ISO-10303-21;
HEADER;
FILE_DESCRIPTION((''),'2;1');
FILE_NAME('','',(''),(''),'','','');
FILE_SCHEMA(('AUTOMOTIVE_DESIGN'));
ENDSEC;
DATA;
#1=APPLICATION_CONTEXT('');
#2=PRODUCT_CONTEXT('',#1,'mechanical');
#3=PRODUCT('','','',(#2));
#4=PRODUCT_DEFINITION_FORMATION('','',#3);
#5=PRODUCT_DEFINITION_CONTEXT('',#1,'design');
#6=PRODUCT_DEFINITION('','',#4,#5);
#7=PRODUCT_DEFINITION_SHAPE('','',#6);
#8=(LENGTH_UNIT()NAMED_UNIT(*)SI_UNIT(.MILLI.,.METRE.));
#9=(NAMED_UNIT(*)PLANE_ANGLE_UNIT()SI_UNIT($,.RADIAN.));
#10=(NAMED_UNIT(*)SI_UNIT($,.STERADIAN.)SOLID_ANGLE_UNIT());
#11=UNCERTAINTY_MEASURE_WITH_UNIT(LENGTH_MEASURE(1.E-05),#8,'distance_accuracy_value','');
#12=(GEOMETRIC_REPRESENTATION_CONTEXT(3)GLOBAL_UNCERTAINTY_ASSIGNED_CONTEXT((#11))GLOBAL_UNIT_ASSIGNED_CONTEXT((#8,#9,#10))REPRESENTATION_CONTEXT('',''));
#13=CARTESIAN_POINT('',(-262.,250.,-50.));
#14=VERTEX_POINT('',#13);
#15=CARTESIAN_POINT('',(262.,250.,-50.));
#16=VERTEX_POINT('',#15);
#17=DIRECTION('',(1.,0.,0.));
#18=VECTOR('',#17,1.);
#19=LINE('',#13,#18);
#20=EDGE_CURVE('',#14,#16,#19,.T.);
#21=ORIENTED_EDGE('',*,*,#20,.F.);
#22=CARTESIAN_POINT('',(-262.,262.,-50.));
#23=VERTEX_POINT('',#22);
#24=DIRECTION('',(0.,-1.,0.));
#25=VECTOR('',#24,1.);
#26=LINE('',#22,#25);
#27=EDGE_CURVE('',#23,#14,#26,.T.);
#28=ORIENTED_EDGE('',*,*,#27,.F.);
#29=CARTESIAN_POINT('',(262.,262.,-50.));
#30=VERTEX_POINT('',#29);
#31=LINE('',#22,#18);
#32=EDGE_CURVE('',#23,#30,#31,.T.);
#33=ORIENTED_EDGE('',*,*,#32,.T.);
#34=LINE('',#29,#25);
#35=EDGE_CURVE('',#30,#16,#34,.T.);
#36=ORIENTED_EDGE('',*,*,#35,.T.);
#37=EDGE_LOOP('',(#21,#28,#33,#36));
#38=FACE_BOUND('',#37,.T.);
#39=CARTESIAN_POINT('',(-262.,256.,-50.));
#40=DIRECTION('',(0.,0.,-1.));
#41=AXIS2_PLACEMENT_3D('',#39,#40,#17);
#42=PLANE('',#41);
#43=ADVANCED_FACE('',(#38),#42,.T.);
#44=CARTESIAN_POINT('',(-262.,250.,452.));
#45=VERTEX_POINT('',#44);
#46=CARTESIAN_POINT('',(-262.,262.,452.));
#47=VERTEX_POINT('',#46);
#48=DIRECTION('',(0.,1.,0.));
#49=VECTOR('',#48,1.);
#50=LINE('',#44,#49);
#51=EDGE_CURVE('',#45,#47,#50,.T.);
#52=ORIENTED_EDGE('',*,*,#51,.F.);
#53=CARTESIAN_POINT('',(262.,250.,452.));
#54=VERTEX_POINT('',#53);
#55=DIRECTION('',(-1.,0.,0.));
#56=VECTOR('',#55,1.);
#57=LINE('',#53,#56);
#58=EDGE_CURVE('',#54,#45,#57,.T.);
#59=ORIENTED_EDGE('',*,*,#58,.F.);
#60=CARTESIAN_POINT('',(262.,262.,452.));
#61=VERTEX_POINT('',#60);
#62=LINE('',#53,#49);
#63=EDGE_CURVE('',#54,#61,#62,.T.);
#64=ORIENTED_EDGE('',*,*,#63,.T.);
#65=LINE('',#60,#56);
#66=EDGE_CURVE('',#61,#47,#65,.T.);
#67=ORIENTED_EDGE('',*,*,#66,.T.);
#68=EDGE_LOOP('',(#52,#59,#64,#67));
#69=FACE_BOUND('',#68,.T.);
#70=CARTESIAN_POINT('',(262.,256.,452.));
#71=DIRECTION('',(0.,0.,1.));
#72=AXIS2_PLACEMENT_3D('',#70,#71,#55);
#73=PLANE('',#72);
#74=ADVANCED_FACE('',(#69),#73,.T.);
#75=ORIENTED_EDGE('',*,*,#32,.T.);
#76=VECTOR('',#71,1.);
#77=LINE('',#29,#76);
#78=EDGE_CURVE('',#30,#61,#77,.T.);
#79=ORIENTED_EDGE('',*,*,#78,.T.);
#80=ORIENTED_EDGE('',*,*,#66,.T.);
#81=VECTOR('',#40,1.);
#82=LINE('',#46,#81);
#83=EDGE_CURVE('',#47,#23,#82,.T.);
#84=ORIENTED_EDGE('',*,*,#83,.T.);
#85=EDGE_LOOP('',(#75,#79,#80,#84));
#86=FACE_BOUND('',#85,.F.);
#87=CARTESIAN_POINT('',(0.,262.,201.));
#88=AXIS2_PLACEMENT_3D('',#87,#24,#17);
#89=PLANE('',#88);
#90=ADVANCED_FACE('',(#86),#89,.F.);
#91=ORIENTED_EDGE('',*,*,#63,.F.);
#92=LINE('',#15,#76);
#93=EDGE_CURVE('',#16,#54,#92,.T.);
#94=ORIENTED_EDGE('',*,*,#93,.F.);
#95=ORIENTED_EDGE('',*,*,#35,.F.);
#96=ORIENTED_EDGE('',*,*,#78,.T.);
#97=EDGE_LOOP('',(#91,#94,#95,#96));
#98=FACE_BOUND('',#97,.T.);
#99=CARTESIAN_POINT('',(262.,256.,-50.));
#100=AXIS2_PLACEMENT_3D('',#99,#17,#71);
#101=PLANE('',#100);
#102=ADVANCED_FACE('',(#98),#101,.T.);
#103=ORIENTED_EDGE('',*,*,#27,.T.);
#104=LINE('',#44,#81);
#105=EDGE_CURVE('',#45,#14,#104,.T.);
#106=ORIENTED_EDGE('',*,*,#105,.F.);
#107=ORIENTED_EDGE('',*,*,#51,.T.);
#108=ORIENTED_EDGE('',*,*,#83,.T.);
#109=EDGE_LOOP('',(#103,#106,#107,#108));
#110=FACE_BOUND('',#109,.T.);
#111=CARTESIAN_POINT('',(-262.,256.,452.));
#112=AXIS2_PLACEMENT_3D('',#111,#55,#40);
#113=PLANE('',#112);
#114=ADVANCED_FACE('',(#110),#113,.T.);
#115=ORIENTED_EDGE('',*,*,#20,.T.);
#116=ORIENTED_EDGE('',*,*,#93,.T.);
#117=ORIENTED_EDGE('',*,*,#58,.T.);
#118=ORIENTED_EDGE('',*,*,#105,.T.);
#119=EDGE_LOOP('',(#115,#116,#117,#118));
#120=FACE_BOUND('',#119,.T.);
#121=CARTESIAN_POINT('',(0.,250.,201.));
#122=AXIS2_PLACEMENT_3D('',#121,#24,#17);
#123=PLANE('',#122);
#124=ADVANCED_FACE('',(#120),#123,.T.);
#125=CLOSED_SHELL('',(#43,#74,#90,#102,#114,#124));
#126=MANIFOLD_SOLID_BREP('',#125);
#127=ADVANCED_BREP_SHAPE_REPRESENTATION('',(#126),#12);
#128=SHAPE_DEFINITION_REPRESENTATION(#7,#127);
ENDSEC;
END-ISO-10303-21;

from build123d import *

# Parameters (mm, degrees)
F0_W      = 500
F0_H      = 500
F1_DEPTH  = 12
F2_W      = 500
F2_H      = 50
F3_DEPTH  = 6
F6_DEPTH  = 6
F14_DEPTH = 6
F15_R     = 19.99999
F19_DEPTH = 6
F22_DEPTH = 12
F25_DEPTH = 6
F27_W     = 12
F27_H     = 320
F28_DEPTH = 44
F31_W     = 196
F31_H     = 12
F32_DEPTH = 44
F37_DEPTH = 3
F43_DEPTH = 12


# Not quite as in the source:
# - a fillet or chamfer is up to 0.001 mm smaller than in the source, because OpenCascade refuses the exact size


with BuildPart() as f1:
    # F0 (on Top) → F1 (new body)
    with BuildSketch(Plane.XY):
        Rectangle(F0_W, F0_H)
    extrude(amount=F1_DEPTH)


with BuildPart() as f3:
    # F2 (on Right) → F3 (new body, symmetric)
    with BuildSketch(Plane.YZ):
        Rectangle(F2_W, F2_H)
    extrude(amount=F3_DEPTH, both=True)


with BuildPart() as f3_1:
    # F4: moved
    add(f3.part.moved(Location((0, 0, -25))))


with BuildPart() as f6:
    # F5 (on Front) → F6 (new body, symmetric)
    with BuildSketch(Plane.XZ):
        Polygon((-250, -25), (250, -25), (250, 25), (6, 25), (6, 0), (-6, 0), (-6, 25), (-250, 25), align=None)
    extrude(amount=F6_DEPTH, both=True)


with BuildPart() as f6_1:
    # F7: moved
    add(f6.part.moved(Location((0, 80, -25))))


with BuildPart() as f8_1:
    # F8: copy of F6
    add(f6_1.part)


with BuildPart() as f3_2:
    add(f3_1.part)

    # F10: cut F6
    add(f6_1.part, mode=Mode.SUBTRACT)


with BuildPart() as f11_1:
    # F11: copy of F6
    add(f6_1.part.moved(Location((0, 164, 0))))


with BuildPart() as f3_3:
    add(f3_2.part)

    # F12: cut F11_1
    add(f11_1.part, mode=Mode.SUBTRACT)


with BuildPart() as f14:
    # F13 (on Right) → F14 (new body, symmetric)
    with BuildSketch(Plane.YZ):
        Polygon((250, -50), (250, 0), (250, 452), (70, 452), (-110, 452), (-250, 100), (-250, -50), align=None)
        Polygon((0, 412), (70, 412), (140, 412), (140, 372), (0, 372), align=None, mode=Mode.SUBTRACT)
    extrude(amount=F14_DEPTH, both=True)

    # F15 (radius 20 in the source; OpenCascade refuses exactly that, so slightly less here)
    f15_edges = [f14.edges().sort_by_distance(p)[0] for p in [
        (0, 140, 372),
        (0, 140, 412),
        (0, 0, 412),
        (0, 0, 372),
    ]]
    fillet(f15_edges, radius=F15_R)


with BuildPart() as f14_1:
    # F16: moved
    add(f14.part.moved(Location((-256, 0, 0))))


with BuildPart() as f17_1:
    # F17: copy of F14
    add(f14_1.part.moved(Location((512, 0, 0))))


with BuildPart() as f19:
    # F18 (on Front) → F19 (new body, symmetric)
    with BuildSketch(Plane.XZ):
        Polygon((-262, 452), (-262, 0), (-262, -50), (262, -50), (262, 452), align=None)
    extrude(amount=F19_DEPTH, both=True)


with BuildPart() as f19_1:
    # F20: moved
    add(f19.part.moved(Location((0, 256, 0))))


with BuildPart() as f22:
    # F21 (on face) → F22 (new body)
    with BuildSketch(Plane.XY.offset(12)):
        Polygon((262, 262), (0, 262), (-262, 262), (-262, -110), (262, -110), align=None)
    extrude(amount=F22_DEPTH)


with BuildPart() as f22_1:
    # F23: moved
    add(f22.part.moved(Location((0, 0, 440))))


with BuildPart() as f25:
    # F24 (on Front) → F25 (new body, symmetric)
    with BuildSketch(Plane.XZ):
        Polygon((-250, 12), (0, 12), (250, 12), (250, 100), (-250, 100), align=None)
    extrude(amount=F25_DEPTH, both=True)


with BuildPart() as f25_1:
    # F26: moved
    add(f25.part.moved(Location((0, -244, 0))))


with BuildPart() as f28:
    # F27 (on Top) → F28 (new body)
    with BuildSketch(Plane.XY):
        with Locations((-24, -90)):
            Rectangle(F27_W, F27_H)
    extrude(amount=F28_DEPTH)


with BuildPart() as f28_1:
    # F29: moved
    add(f28.part.moved(Location((0, 0, -48))))


with BuildPart() as f30_1:
    # F30: copy of F28
    add(f28_1.part.moved(Location((-208, 0, 0))))


with BuildPart() as f32:
    # F31 (on Top) → F32 (new body)
    with BuildSketch(Plane.XY):
        with Locations((-128, -244)):
            Rectangle(F31_W, F31_H)
    extrude(amount=-F32_DEPTH)


with BuildPart() as f32_1:
    # F33: moved
    add(f32.part.moved(Location((0, 0, -4))))


with BuildPart() as f34_1:
    # F34: copy of F32
    add(f32_1.part.moved(Location((0, 308, 0))))


with BuildPart() as f35_1:
    # F35: copy of F32
    add(f32_1.part.moved(Location((256, 0, 0))))


with BuildPart() as f35_2:
    # F35: copy of F30_1
    add(f30_1.part.moved(Location((256, 0, 0))))


with BuildPart() as f35_3:
    # F35: copy of F28
    add(f28_1.part.moved(Location((256, 0, 0))))


with BuildPart() as f35_4:
    # F35: copy of F34_1
    add(f34_1.part.moved(Location((256, 0, 0))))


with BuildPart() as f37:
    # F36 (on Top) → F37 (new body)
    with BuildSketch(Plane.XY):
        Polygon((-24, -244), (-24, 0), (-24, 64), (-232, 64), (-232, -244), align=None)
    extrude(amount=F37_DEPTH)


with BuildPart() as f37_1:
    # F38: moved
    add(f37.part.moved(Location((0, 0, -44))))


with BuildPart() as f39_1:
    # F39: copy of F37
    add(f37_1.part.moved(Location((256, 0, 0))))


with BuildPart() as f30_1_1:
    add(f30_1.part)

    # F40: cut F37
    add(f37_1.part, mode=Mode.SUBTRACT)


with BuildPart() as f32_2:
    add(f32_1.part)

    # F40: cut F37
    add(f37_1.part, mode=Mode.SUBTRACT)


with BuildPart() as f28_2:
    add(f28_1.part)

    # F40: cut F37
    add(f37_1.part, mode=Mode.SUBTRACT)


with BuildPart() as f34_1_1:
    add(f34_1.part)

    # F40: cut F37
    add(f37_1.part, mode=Mode.SUBTRACT)


with BuildPart() as f35_1_1:
    add(f35_1.part)

    # F41: cut F39_1
    add(f39_1.part, mode=Mode.SUBTRACT)


with BuildPart() as f35_3_1:
    add(f35_3.part)

    # F41: cut F39_1
    add(f39_1.part, mode=Mode.SUBTRACT)


with BuildPart() as f35_4_1:
    add(f35_4.part)

    # F41: cut F39_1
    add(f39_1.part, mode=Mode.SUBTRACT)


with BuildPart() as f35_2_1:
    add(f35_2.part)

    # F41: cut F39_1
    add(f39_1.part, mode=Mode.SUBTRACT)


with BuildPart() as f43:
    # F42 (on Front) → F43 (new body)
    with BuildSketch(Plane.XZ):
        Polygon((0, 12), (0, 0), (0, -50), (262, -50), (262, 12), align=None)
    extrude(amount=F43_DEPTH)


with BuildPart() as f43_1:
    # F44: moved
    add(f43.part.moved(Location((0, -250, 0))))


with BuildPart() as f45_1:
    # F45: copy of F43
    add(f43_1.part.moved(Location((-262, 0, 0))))


solid = f19_1.part
